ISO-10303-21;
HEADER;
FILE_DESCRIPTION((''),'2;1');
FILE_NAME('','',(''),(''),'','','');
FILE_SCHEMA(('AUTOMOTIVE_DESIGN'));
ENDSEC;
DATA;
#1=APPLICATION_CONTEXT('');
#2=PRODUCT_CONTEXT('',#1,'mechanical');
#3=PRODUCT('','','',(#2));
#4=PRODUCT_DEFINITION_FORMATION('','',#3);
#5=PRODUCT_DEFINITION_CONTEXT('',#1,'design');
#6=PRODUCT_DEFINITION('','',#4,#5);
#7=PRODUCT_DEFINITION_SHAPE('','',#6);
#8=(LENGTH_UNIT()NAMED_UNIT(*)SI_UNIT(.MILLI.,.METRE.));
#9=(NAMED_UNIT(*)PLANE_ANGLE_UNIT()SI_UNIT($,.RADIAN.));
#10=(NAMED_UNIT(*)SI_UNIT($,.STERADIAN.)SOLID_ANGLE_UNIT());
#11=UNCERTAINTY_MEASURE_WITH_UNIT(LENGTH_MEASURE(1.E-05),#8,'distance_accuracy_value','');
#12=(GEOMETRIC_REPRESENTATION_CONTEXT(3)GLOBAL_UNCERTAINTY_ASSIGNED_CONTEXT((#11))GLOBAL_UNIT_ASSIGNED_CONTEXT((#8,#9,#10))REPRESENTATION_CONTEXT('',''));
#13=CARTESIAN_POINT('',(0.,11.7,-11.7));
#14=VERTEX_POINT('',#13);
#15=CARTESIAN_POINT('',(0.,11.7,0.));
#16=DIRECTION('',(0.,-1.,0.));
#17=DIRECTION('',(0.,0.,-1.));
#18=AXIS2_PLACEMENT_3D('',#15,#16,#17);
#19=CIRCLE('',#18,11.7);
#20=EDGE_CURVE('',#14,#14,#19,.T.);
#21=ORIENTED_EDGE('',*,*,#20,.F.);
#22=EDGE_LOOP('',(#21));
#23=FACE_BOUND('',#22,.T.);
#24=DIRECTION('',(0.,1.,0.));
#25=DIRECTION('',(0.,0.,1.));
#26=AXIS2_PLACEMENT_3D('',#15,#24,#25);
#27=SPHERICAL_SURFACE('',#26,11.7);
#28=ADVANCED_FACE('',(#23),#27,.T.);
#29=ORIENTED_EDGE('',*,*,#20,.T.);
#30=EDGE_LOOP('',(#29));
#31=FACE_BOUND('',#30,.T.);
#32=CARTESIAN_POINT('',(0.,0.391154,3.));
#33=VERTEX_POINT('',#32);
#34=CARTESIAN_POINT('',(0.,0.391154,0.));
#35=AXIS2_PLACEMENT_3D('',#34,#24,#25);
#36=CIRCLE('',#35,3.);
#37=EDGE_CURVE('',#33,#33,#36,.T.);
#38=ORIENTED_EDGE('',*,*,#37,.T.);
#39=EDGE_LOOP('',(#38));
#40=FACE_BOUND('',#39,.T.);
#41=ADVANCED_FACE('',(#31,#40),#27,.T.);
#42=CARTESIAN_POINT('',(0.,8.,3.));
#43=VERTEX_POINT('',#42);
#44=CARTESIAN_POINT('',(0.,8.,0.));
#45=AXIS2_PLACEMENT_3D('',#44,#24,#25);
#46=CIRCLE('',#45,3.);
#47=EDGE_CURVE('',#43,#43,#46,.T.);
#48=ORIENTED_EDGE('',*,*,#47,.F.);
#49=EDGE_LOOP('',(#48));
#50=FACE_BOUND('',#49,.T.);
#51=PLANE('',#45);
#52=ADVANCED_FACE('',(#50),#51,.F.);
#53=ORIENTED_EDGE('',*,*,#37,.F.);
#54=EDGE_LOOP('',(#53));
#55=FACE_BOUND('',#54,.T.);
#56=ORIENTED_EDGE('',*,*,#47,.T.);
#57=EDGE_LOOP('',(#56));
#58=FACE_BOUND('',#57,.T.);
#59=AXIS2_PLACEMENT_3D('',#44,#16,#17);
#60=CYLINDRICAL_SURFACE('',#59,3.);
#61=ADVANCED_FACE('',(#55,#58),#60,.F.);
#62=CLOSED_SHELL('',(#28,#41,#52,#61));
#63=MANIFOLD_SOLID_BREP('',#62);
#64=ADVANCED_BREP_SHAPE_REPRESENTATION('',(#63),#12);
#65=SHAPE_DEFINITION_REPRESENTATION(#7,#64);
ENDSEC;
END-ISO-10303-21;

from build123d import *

# Parameters (mm, degrees)
CROQUIS1_R              = 11.7
SALIENTE_EXTRUIR1_DEPTH = 23.4
REDONDEO1_R             = 11.7
CROQUIS2_R              = 3
CORTAR_EXTRUIR1_DEPTH   = 8


with BuildPart() as part:
    # Croquis1 → Saliente-Extruir1 (new body)
    with BuildSketch(Plane(origin=(0, 0, 0), x_dir=(1, 0, 0), z_dir=(0, 1, 0))):
        with Locations(Location((0, 0, 0), (0, 0, 270))):
            Circle(CROQUIS1_R)
    extrude(amount=SALIENTE_EXTRUIR1_DEPTH)

    # Redondeo1
    redondeo1_edges = [part.edges().sort_by_distance(p)[0] for p in [
        (0, 0, -11.7),
        (0, 23.4, -11.7),
    ]]
    fillet(redondeo1_edges, radius=REDONDEO1_R - 0.0001)  # a hair under: the kernel refuses the full size

    # Croquis2 → Cortar-Extruir1 (cut)
    with BuildSketch(Plane(origin=(0, 0, 0), x_dir=(1, 0, 0), z_dir=(0, 1, 0))):
        with Locations(Location((0, 0, 0), (0, 0, 270))):
            Circle(CROQUIS2_R)
    extrude(amount=CORTAR_EXTRUIR1_DEPTH, mode=Mode.SUBTRACT)


solid = part.part
